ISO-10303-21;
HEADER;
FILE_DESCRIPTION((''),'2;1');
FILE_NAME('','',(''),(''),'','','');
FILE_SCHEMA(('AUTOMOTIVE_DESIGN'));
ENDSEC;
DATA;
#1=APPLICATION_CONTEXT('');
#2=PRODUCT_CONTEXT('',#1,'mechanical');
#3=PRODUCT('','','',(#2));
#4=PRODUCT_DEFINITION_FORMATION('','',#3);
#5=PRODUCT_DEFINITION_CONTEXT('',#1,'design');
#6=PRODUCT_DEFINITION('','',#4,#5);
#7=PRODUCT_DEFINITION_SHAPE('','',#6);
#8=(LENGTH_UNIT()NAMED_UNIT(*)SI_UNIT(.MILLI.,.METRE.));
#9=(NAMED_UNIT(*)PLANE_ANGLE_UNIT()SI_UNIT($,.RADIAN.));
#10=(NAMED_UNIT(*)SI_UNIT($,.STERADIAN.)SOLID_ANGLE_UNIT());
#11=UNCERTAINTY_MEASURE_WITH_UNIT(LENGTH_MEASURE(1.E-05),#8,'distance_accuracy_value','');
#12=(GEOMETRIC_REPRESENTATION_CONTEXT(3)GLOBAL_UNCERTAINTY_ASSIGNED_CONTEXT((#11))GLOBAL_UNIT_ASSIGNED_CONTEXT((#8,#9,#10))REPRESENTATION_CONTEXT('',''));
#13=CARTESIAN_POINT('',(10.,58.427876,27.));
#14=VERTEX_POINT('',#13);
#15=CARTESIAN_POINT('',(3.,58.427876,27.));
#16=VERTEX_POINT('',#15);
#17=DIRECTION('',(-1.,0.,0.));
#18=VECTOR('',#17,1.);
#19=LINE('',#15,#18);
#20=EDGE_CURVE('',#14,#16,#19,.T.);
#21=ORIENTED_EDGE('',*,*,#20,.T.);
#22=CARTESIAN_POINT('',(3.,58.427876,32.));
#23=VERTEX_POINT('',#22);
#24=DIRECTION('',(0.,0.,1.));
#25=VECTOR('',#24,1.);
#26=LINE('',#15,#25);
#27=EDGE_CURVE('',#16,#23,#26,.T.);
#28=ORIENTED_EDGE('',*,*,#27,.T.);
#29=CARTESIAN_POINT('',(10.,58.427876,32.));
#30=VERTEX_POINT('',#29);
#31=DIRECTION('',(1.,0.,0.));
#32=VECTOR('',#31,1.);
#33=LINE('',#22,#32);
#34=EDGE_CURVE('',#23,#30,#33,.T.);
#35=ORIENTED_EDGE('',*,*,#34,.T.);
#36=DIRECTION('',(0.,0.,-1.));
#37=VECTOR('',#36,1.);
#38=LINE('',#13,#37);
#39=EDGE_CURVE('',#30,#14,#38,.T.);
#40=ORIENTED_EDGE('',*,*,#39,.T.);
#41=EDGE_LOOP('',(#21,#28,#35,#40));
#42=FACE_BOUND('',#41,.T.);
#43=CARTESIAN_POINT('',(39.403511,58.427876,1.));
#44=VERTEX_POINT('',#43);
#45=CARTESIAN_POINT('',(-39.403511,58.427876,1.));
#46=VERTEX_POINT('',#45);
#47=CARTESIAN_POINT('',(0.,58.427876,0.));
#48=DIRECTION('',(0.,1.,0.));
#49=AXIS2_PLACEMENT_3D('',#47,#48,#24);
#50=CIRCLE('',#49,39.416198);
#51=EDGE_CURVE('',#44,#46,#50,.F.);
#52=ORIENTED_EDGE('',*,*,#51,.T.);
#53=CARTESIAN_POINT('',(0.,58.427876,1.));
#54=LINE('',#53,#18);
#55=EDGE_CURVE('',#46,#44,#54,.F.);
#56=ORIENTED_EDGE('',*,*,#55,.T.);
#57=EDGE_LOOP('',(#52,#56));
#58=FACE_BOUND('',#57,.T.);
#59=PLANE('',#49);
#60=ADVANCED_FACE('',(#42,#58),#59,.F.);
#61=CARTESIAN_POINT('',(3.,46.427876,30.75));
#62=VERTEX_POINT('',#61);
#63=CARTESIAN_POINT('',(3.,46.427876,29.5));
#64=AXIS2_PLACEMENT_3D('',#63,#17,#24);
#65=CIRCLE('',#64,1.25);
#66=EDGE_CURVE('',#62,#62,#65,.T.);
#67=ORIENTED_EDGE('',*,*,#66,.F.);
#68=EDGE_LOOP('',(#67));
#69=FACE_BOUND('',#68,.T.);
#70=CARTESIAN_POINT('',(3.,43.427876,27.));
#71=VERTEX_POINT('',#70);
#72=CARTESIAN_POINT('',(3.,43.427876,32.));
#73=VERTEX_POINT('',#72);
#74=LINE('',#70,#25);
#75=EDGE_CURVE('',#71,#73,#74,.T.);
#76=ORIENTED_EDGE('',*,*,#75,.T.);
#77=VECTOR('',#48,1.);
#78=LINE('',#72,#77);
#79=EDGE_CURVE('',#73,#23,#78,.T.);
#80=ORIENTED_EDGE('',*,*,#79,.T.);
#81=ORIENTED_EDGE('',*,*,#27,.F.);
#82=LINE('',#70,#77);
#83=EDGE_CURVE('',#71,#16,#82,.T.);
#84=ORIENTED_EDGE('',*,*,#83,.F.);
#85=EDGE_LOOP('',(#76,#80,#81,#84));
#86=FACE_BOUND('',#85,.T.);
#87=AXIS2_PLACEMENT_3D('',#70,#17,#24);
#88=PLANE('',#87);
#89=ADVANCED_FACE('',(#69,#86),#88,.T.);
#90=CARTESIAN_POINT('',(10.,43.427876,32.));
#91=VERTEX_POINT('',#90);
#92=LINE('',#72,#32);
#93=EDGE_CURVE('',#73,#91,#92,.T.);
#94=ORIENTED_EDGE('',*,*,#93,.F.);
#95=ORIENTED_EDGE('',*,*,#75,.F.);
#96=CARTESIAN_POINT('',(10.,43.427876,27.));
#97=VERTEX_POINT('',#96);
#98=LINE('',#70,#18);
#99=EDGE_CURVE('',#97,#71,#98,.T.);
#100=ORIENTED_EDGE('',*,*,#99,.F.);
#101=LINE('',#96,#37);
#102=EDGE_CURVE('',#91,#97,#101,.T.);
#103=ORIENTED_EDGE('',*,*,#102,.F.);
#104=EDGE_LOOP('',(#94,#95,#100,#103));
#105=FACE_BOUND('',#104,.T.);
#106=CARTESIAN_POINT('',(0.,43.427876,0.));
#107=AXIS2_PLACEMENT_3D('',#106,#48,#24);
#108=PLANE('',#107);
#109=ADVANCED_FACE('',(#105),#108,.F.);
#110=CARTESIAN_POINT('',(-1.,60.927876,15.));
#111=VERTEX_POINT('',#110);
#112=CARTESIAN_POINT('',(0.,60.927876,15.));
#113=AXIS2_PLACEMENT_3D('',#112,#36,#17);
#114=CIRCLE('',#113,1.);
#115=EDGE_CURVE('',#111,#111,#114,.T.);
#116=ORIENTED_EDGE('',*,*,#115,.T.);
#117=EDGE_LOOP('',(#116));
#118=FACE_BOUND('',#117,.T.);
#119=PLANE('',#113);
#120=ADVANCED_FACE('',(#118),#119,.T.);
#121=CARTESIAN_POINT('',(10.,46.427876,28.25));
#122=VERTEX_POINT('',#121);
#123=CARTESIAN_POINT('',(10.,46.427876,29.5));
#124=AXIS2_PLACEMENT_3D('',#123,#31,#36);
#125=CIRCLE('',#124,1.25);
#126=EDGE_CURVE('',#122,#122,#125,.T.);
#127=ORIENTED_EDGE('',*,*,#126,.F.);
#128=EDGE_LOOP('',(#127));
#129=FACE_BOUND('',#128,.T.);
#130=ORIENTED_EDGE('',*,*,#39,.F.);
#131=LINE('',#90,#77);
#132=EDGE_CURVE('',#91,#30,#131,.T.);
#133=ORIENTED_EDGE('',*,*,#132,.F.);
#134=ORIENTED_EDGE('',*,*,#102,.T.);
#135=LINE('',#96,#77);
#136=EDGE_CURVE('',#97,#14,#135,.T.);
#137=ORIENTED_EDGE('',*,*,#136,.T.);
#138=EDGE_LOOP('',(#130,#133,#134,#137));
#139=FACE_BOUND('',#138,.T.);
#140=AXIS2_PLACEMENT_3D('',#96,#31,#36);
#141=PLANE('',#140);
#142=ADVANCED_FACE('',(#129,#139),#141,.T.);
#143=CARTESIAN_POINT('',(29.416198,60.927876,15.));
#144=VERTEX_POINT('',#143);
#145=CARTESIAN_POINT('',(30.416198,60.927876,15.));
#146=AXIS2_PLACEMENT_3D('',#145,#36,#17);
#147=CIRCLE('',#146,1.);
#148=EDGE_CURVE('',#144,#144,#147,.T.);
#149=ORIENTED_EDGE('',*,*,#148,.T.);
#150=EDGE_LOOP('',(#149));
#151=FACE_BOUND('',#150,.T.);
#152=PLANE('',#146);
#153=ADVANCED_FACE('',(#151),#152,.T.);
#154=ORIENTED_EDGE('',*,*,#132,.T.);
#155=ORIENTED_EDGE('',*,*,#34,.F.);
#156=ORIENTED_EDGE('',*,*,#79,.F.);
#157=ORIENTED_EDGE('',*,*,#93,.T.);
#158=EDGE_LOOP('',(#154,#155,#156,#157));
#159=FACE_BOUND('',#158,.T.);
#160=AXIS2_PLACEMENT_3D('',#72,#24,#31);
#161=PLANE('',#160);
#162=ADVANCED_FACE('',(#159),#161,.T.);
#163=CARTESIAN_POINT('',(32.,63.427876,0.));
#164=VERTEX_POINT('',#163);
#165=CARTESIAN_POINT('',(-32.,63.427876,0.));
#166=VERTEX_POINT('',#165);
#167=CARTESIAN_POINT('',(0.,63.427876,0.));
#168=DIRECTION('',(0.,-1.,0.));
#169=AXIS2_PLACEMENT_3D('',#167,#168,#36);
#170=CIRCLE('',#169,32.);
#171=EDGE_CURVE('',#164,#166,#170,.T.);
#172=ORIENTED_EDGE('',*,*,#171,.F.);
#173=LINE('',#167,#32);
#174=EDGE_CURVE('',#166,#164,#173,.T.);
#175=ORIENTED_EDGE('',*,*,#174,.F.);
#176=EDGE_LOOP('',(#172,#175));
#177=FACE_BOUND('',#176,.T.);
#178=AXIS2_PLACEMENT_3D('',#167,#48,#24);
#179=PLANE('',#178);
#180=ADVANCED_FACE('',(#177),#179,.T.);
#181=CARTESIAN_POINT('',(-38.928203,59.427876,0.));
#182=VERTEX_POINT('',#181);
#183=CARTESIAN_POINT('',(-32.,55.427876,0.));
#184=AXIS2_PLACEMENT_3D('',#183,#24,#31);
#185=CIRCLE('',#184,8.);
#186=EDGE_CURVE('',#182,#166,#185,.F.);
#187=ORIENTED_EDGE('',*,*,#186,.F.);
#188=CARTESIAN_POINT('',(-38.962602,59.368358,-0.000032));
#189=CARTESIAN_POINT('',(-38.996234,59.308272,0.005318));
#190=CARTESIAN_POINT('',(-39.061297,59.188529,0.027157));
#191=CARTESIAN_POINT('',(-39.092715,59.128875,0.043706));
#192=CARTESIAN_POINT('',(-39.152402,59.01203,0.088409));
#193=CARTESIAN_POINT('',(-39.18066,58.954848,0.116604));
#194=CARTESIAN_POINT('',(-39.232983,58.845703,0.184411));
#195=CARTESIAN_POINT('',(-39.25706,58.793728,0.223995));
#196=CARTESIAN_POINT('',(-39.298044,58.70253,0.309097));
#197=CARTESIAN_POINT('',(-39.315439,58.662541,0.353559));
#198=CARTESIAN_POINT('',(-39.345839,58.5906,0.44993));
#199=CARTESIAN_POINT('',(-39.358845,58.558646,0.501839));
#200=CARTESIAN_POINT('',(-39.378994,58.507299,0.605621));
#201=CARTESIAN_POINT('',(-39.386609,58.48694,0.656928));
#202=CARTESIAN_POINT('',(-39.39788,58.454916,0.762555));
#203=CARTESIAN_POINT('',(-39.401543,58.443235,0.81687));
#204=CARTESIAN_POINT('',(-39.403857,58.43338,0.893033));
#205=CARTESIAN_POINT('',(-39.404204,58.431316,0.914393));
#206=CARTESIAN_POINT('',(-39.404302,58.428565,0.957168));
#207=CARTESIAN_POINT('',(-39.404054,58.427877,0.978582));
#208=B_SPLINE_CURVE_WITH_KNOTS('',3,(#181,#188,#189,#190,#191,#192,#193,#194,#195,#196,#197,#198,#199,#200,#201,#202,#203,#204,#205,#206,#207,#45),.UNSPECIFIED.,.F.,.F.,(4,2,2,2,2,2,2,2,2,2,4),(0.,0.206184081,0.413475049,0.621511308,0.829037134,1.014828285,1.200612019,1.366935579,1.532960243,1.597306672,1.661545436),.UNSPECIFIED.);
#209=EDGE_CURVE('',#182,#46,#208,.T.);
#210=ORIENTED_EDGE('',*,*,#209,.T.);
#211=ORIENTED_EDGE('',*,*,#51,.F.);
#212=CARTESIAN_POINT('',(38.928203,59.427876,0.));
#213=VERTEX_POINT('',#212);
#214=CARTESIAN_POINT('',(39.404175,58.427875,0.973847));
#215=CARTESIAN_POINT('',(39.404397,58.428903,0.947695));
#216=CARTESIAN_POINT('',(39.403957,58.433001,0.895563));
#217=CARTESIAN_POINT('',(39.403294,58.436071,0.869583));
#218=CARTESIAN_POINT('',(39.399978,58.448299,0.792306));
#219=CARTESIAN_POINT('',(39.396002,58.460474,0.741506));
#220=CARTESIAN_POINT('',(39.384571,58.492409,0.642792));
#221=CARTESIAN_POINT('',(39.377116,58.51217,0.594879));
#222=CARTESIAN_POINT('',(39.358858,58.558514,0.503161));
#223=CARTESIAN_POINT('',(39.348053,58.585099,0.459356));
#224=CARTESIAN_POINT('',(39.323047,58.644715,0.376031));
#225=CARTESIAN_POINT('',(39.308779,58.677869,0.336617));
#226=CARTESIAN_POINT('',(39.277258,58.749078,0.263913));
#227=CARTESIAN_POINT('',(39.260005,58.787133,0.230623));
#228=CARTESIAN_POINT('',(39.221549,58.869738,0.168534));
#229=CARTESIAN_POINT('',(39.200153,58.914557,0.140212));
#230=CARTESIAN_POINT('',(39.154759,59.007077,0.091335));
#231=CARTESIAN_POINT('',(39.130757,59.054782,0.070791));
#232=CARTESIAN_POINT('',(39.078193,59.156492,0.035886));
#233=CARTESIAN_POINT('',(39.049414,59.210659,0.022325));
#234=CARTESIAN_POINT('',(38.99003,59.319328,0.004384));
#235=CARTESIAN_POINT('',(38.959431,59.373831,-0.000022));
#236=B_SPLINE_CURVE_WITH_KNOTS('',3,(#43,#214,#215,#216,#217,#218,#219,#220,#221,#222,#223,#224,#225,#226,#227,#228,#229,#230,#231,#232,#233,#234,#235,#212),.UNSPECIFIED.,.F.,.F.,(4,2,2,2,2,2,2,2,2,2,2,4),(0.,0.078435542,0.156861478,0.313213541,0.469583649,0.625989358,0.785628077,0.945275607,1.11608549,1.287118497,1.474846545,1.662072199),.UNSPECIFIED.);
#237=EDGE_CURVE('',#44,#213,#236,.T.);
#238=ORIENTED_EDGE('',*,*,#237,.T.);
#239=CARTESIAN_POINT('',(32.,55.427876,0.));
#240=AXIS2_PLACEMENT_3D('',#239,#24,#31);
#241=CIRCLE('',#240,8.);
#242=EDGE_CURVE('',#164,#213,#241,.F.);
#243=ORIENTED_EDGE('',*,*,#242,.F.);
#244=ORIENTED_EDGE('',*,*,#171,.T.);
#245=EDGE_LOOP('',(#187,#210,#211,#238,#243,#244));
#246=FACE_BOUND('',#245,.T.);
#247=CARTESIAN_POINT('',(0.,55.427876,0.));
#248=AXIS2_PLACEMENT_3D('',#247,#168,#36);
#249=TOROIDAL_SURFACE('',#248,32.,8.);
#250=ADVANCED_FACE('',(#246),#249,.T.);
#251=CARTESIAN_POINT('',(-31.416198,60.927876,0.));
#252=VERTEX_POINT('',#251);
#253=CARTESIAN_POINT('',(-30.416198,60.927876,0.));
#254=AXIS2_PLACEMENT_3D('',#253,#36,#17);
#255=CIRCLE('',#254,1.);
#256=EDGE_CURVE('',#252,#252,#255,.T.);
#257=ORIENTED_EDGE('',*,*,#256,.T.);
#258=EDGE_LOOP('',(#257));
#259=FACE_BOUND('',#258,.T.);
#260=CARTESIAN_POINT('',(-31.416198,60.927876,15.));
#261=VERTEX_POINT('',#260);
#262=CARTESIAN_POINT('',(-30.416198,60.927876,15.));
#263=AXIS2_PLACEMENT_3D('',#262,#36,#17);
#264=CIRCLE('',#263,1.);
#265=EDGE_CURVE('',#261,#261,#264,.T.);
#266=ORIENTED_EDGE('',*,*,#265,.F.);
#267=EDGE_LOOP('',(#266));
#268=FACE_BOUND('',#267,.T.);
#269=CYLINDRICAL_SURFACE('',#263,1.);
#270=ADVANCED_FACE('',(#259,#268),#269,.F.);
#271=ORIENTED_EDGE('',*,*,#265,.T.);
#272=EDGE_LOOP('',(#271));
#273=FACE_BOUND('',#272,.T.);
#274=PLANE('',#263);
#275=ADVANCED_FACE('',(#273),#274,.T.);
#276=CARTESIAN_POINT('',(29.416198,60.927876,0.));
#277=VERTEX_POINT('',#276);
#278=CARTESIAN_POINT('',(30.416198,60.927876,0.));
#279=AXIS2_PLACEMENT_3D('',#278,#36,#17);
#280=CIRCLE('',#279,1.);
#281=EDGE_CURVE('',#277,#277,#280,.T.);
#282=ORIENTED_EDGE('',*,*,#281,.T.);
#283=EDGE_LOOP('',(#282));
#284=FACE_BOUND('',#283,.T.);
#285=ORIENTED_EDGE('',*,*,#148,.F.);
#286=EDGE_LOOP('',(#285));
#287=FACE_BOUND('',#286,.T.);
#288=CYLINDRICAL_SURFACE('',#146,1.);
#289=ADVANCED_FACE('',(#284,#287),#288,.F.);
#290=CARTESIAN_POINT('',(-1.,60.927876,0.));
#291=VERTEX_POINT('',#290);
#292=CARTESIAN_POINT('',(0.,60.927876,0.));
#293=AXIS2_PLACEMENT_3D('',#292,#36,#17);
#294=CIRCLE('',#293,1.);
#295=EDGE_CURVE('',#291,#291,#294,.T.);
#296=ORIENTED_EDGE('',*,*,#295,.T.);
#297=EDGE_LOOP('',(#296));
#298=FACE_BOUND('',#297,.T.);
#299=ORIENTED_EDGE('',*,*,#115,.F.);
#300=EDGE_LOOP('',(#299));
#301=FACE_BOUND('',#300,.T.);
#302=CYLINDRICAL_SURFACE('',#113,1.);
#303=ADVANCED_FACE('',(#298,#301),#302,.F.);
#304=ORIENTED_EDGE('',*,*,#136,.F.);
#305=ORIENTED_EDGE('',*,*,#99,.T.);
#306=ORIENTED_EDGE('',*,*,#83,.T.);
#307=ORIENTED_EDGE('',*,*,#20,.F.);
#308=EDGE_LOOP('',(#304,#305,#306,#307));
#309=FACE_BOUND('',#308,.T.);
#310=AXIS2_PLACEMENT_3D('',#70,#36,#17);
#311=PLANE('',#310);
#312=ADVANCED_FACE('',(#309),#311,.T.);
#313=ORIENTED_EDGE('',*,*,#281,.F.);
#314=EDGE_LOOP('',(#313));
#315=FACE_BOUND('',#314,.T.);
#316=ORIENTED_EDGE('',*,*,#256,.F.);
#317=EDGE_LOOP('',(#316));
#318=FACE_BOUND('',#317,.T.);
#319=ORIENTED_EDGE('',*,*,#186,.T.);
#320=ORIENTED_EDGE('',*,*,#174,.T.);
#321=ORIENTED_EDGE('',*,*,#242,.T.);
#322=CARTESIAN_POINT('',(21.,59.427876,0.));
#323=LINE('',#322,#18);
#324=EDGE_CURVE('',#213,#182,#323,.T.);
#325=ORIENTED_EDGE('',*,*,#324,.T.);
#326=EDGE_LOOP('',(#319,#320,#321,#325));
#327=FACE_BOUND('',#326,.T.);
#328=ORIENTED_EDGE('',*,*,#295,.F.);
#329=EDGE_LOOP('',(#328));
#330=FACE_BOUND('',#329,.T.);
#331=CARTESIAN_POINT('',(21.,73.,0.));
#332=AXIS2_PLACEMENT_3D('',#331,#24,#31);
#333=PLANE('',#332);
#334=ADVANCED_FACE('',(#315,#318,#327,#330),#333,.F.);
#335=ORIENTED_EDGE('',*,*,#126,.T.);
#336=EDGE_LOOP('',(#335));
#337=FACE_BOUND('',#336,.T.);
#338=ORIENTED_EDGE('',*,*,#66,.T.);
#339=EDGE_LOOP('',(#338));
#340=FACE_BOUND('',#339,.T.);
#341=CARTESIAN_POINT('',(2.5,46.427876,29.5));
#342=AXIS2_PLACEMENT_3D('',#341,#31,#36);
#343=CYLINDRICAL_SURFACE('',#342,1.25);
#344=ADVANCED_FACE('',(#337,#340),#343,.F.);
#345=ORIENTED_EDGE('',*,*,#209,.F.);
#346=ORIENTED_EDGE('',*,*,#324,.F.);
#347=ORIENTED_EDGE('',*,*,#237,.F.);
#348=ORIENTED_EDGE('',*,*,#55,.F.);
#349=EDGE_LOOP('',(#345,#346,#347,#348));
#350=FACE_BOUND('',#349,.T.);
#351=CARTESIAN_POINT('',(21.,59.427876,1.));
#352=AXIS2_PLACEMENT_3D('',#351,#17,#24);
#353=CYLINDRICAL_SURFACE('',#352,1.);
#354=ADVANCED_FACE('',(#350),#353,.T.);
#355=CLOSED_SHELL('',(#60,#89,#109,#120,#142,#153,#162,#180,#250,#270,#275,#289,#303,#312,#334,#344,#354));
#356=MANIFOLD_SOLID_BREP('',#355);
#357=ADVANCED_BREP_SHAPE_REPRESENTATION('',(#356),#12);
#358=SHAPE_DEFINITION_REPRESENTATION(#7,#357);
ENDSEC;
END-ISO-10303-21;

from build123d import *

# Parameters (mm, degrees)
CUT_EXTRUDE3_DEPTH           = 60
CUT_EXTRUDE5_DEPTH           = 2
CUT_EXTRUDE5_DEPTH_BACK      = 30
SKETCH9_R                    = 38
SKETCH9_R_2                  = 23
SKETCH19_W                   = 12
SKETCH19_H                   = 36.5
CUT_REVOLVE2_ANGLE           = 65
CUT_REVOLVE2_OTHER_WAY_ANGLE = 65
SKETCH21_W                   = 3.25
SKETCH21_H                   = 4
BOSS_EXTRUDE3_DEPTH          = 1.35
CIRPATTERN1_COUNT            = 5
CUT_EXTRUDE9_START           = -5
CUT_EXTRUDE9_DEPTH           = 5
SKETCH23_R                   = 10.5
CUT_EXTRUDE10_DEPTH          = 10
SKETCH24_W                   = 15
SKETCH24_H                   = 8
BOSS_EXTRUDE4_DEPTH          = 8
SKETCH26_W                   = 10
SKETCH26_H                   = 6
CUT_EXTRUDE11_DEPTH          = 10
SKETCH27_W                   = 4
SKETCH27_H                   = 5
CUT_EXTRUDE12_DEPTH          = 5
CUT_EXTRUDE14_DEPTH          = 2
CUT_EXTRUDE14_DEPTH_BACK     = 30
SKETCH29_R                   = 1
CUT_EXTRUDE15_DEPTH          = 15
FILLET1_R                    = 6
FILLET2_R                    = 8
INTERSECT1_DEPTH             = 58.427876097
SKETCH31_W                   = 7
SKETCH31_H                   = 5
BOSS_EXTRUDE7_DEPTH          = 15
SKETCH32_R                   = 1.25
CUT_EXTRUDE16_DEPTH          = 7.5
FILLET3_R                    = 1


# Read off the part's stored shape, not the designer's step: Cut-Extrude9, Intersect1
with BuildPart() as part:
    # Sketch1 → Revolve1 (revolve)
    with BuildSketch(Plane.XY, mode=Mode.PRIVATE) as revolve1_sk:
        with BuildLine():
            Line((0, 63.427876097), (32, 63.427876097))
            ThreePointArc((32, 63.427876097), (37.656854249, 61.084730346), (40, 55.427876097))
            Line((40, 55.427876097), (40, 28.846818009))
            ThreePointArc((40, 28.846818009), (38.792081772, 24.082439968), (35.460140376, 20.469057744))
            Line((35.460140376, 20.469057744), (28.539859624, 15.958818353))
            ThreePointArc((28.539859624, 15.958818353), (25.207918228, 12.345436129), (24, 7.581058088))
            Line((24, 7.581058088), (24, 3.25))
            Line((24, 3.25), (24.35, 3))
            Line((24.35, 3), (24.35, 0))
            Line((24.35, 0), (22.5, 0))
            Line((22.5, 0), (22.5, 12.5))
            ThreePointArc((22.5, 12.5), (22.353553391, 12.853553391), (22, 13))
            Line((22, 13), (0, 13))
            Line((0, 13), (0, 63.427876097))
        make_face()
    revolve(revolve1_sk.sketch.rotate(Axis((0, 0, 0), (0, 1, 0)), 90), axis=Axis((0, 0, 0), (0, 1, 0)))

    # Sketch11 → Cut-Extrude3 (cut)
    with BuildSketch(Plane(origin=(0, 13, 0), x_dir=(-1, 0, 0), z_dir=(0, -1, 0))):
        with BuildLine():
            Line((-21, 0), (21, 0))
            ThreePointArc((21, 0), (0, 21), (-21, 0))
        make_face()
    extrude(amount=-CUT_EXTRUDE3_DEPTH, mode=Mode.SUBTRACT)

    # Sketch9 → Cut-Extrude5 (cut, two sides: drawn at the far end of the back side and taken through both)
    with BuildSketch(Plane(origin=(0, 55.427876097, 0), x_dir=(1, 0, 0), z_dir=(0, 1, 0)).offset(-CUT_EXTRUDE5_DEPTH_BACK)):
        with Locations(Location((0, 0, 0), (0, 0, 270))):
            Circle(SKETCH9_R)
        with Locations(Location((0, 0, 0), (0, 0, 270))):
            Circle(SKETCH9_R_2, mode=Mode.SUBTRACT)
    extrude(amount=CUT_EXTRUDE5_DEPTH + CUT_EXTRUDE5_DEPTH_BACK, mode=Mode.SUBTRACT)

    # Sketch19 → Cut-Revolve2 (revolve, cut)
    with BuildSketch(Plane(origin=(0, 0, 0), x_dir=(0, 0, -1), z_dir=(1, 0, 0))):
        with Locations((-41.064715832, 37.177876097)):
            Rectangle(SKETCH19_W, SKETCH19_H)
    revolve(axis=Axis((0, 0, 0), (0, 1, 0)), revolution_arc=CUT_REVOLVE2_ANGLE, mode=Mode.SUBTRACT)

    # Sketch19 → Cut-Revolve2 other way (revolve, cut)
    with BuildSketch(Plane(origin=(0, 0, 0), x_dir=(0, 0, -1), z_dir=(1, 0, 0))):
        with Locations((-41.064715832, 37.177876097)):
            Rectangle(SKETCH19_W, SKETCH19_H)
    revolve(axis=Axis((0, 0, 0), (0, -1, 0)), revolution_arc=CUT_REVOLVE2_OTHER_WAY_ANGLE, mode=Mode.SUBTRACT)

    # Sketch21 → Boss-Extrude3 (add)
    with BuildSketch(Plane(origin=(0, 0, 22.5), x_dir=(-1, 0, 0), z_dir=(0, 0, -1))):
        with Locations((0, 2)):
            Rectangle(SKETCH21_W, SKETCH21_H)
    boss_extrude3 = extrude(amount=BOSS_EXTRUDE3_DEPTH)

    # CirPattern1: Boss-Extrude3 ×5 about axis
    cirpattern1_axis = Axis((0, 0, 0), (0, 1, 0))
    for i in range(1, CIRPATTERN1_COUNT):
        add(boss_extrude3.rotate(cirpattern1_axis, i * 360 / CIRPATTERN1_COUNT))

    # Cut-Extrude9 outline → Cut-Extrude9 (cut)
    with BuildSketch(Plane(origin=(0, 63.427876097, 0), x_dir=(1, 0, 0), z_dir=(0, 1, 0)).offset(CUT_EXTRUDE9_START)):
        with BuildLine():
            ThreePointArc((40, 0), (0, 40), (-40, 0))
            Line((-40, 0), (-21, 0))
            ThreePointArc((-21, 0), (0, 21), (21, 0))
            Line((21, 0), (40, 0))
        make_face()
    extrude(amount=CUT_EXTRUDE9_DEPTH, mode=Mode.SUBTRACT)

    # Sketch23 → Cut-Extrude10 (cut)
    with BuildSketch(Plane(origin=(0, 0, -40), x_dir=(-1, 0, 0), z_dir=(0, 0, -1))):
        with Locations((0, 42.137876097)):
            Circle(SKETCH23_R)
    extrude(amount=-CUT_EXTRUDE10_DEPTH, mode=Mode.SUBTRACT)

    # Sketch24 → Boss-Extrude4 (add)
    with BuildSketch(Plane(origin=(0, 58.427876097, 0), x_dir=(1, 0, 0), z_dir=(0, 1, 0))):
        with Locations((0, 30)):
            Rectangle(SKETCH24_W, SKETCH24_H)
    extrude(amount=-BOSS_EXTRUDE4_DEPTH)

    # Sketch26 → Cut-Extrude11 (cut)
    with BuildSketch(Plane(origin=(0, 58.427876097, 0), x_dir=(1, 0, 0), z_dir=(0, 1, 0))):
        with Locations((0, 30)):
            Rectangle(SKETCH26_W, SKETCH26_H)
    extrude(amount=-CUT_EXTRUDE11_DEPTH, mode=Mode.SUBTRACT)

    # Sketch27 → Cut-Extrude12 (cut)
    with BuildSketch(Plane(origin=(7.5, 0, 0), x_dir=(0, 0, -1), z_dir=(1, 0, 0))):
        with Locations((30, 53.927876097)):
            Rectangle(SKETCH27_W, SKETCH27_H)
    extrude(amount=-CUT_EXTRUDE12_DEPTH, mode=Mode.SUBTRACT)

    # Sketch28 → Cut-Extrude14 (cut, two sides: drawn at the far end of the back side and taken through both)
    with BuildSketch(Plane(origin=(0, 55.427876097, 0), x_dir=(1, 0, 0), z_dir=(0, 1, 0)).offset(-CUT_EXTRUDE14_DEPTH_BACK)):
        with BuildLine():
            Line((-22.912878475, -2), (22.912878475, -2))
            ThreePointArc((22.912878475, -2), (0, -23), (-22.912878475, -2))
        make_face()
    extrude(amount=CUT_EXTRUDE14_DEPTH + CUT_EXTRUDE14_DEPTH_BACK, mode=Mode.SUBTRACT)

    # Sketch29 → Cut-Extrude15 (cut)
    with BuildSketch(Plane(origin=(0, 0, 0), x_dir=(-1, 0, 0), z_dir=(0, 0, -1))):
        with Locations((-30.416198487, 60.927876097)):
            Circle(SKETCH29_R)
        with Locations((30.416198487, 60.927876097)):
            Circle(SKETCH29_R)
        with Locations((0, 60.927876097)):
            Circle(SKETCH29_R)
    extrude(amount=-CUT_EXTRUDE15_DEPTH, mode=Mode.SUBTRACT)

    # Fillet1
    fillet1_edges = [part.edges().sort_by_distance(p)[0] for p in [
        (21, 35.713938048, 0),
        (-21, 35.713938048, 0),
    ]]
    fillet(fillet1_edges, radius=FILLET1_R)

    # Fillet2
    fillet2_edges = [part.edges().sort_by_distance(p)[0] for p in [
        (-22.912878475, 41.427876097, 2),
        (22.912878475, 41.427876097, 2),
    ]]
    fillet(fillet2_edges, radius=FILLET2_R)

    # Intersect1 outline → Intersect1 (cut)
    with BuildSketch(Plane(origin=(0, 0, 0), x_dir=(1, 0, 0), z_dir=(0, 1, 0))):
        with BuildLine():
            Line((-37.508702776, -13.895942431), (-42, -15.355253362))
            Line((-42, -15.355253362), (-42, -41))
            Line((-42, -41), (42, -41))
            Line((42, -41), (42, -15.355253362))
            Line((42, -15.355253362), (37.508702776, -13.895942431))
            ThreePointArc((37.508702776, -13.895942431), (0, 40), (-37.508702776, -13.895942431))
        make_face()
        with BuildLine():
            ThreePointArc((19.246817919, 8.4), (18.767687244, 2.713664655), (13.747727085, 0))
            Line((13.747727085, 0), (-13.747727085, 0))
            ThreePointArc((-13.747727085, 0), (-18.767687244, 2.713664655), (-19.246817919, 8.4))
            ThreePointArc((-19.246817919, 8.4), (0, 21), (19.246817919, 8.4))
        make_face(mode=Mode.SUBTRACT)
    extrude(amount=INTERSECT1_DEPTH, mode=Mode.SUBTRACT)

    # Sketch31 → Boss-Extrude7 (add)
    with BuildSketch(Plane(origin=(0, 58.427876097, 0), x_dir=(1, 0, 0), z_dir=(0, 1, 0))):
        with Locations((6.5, -29.5)):
            Rectangle(SKETCH31_W, SKETCH31_H)
    extrude(amount=-BOSS_EXTRUDE7_DEPTH)

    # Sketch32 → Cut-Extrude16 (cut)
    with BuildSketch(Plane(origin=(10, 0, 0), x_dir=(0, 0, -1), z_dir=(1, 0, 0))):
        with Locations((-29.5, 46.427876097)):
            Circle(SKETCH32_R)
    extrude(amount=-CUT_EXTRUDE16_DEPTH, mode=Mode.SUBTRACT)

    # Fillet3
    fillet3_edges = [part.edges().sort_by_distance(p)[0] for p in [
        (0, 58.427876097, 0),
    ]]
    fillet(fillet3_edges, radius=FILLET3_R)


solid = part.part
